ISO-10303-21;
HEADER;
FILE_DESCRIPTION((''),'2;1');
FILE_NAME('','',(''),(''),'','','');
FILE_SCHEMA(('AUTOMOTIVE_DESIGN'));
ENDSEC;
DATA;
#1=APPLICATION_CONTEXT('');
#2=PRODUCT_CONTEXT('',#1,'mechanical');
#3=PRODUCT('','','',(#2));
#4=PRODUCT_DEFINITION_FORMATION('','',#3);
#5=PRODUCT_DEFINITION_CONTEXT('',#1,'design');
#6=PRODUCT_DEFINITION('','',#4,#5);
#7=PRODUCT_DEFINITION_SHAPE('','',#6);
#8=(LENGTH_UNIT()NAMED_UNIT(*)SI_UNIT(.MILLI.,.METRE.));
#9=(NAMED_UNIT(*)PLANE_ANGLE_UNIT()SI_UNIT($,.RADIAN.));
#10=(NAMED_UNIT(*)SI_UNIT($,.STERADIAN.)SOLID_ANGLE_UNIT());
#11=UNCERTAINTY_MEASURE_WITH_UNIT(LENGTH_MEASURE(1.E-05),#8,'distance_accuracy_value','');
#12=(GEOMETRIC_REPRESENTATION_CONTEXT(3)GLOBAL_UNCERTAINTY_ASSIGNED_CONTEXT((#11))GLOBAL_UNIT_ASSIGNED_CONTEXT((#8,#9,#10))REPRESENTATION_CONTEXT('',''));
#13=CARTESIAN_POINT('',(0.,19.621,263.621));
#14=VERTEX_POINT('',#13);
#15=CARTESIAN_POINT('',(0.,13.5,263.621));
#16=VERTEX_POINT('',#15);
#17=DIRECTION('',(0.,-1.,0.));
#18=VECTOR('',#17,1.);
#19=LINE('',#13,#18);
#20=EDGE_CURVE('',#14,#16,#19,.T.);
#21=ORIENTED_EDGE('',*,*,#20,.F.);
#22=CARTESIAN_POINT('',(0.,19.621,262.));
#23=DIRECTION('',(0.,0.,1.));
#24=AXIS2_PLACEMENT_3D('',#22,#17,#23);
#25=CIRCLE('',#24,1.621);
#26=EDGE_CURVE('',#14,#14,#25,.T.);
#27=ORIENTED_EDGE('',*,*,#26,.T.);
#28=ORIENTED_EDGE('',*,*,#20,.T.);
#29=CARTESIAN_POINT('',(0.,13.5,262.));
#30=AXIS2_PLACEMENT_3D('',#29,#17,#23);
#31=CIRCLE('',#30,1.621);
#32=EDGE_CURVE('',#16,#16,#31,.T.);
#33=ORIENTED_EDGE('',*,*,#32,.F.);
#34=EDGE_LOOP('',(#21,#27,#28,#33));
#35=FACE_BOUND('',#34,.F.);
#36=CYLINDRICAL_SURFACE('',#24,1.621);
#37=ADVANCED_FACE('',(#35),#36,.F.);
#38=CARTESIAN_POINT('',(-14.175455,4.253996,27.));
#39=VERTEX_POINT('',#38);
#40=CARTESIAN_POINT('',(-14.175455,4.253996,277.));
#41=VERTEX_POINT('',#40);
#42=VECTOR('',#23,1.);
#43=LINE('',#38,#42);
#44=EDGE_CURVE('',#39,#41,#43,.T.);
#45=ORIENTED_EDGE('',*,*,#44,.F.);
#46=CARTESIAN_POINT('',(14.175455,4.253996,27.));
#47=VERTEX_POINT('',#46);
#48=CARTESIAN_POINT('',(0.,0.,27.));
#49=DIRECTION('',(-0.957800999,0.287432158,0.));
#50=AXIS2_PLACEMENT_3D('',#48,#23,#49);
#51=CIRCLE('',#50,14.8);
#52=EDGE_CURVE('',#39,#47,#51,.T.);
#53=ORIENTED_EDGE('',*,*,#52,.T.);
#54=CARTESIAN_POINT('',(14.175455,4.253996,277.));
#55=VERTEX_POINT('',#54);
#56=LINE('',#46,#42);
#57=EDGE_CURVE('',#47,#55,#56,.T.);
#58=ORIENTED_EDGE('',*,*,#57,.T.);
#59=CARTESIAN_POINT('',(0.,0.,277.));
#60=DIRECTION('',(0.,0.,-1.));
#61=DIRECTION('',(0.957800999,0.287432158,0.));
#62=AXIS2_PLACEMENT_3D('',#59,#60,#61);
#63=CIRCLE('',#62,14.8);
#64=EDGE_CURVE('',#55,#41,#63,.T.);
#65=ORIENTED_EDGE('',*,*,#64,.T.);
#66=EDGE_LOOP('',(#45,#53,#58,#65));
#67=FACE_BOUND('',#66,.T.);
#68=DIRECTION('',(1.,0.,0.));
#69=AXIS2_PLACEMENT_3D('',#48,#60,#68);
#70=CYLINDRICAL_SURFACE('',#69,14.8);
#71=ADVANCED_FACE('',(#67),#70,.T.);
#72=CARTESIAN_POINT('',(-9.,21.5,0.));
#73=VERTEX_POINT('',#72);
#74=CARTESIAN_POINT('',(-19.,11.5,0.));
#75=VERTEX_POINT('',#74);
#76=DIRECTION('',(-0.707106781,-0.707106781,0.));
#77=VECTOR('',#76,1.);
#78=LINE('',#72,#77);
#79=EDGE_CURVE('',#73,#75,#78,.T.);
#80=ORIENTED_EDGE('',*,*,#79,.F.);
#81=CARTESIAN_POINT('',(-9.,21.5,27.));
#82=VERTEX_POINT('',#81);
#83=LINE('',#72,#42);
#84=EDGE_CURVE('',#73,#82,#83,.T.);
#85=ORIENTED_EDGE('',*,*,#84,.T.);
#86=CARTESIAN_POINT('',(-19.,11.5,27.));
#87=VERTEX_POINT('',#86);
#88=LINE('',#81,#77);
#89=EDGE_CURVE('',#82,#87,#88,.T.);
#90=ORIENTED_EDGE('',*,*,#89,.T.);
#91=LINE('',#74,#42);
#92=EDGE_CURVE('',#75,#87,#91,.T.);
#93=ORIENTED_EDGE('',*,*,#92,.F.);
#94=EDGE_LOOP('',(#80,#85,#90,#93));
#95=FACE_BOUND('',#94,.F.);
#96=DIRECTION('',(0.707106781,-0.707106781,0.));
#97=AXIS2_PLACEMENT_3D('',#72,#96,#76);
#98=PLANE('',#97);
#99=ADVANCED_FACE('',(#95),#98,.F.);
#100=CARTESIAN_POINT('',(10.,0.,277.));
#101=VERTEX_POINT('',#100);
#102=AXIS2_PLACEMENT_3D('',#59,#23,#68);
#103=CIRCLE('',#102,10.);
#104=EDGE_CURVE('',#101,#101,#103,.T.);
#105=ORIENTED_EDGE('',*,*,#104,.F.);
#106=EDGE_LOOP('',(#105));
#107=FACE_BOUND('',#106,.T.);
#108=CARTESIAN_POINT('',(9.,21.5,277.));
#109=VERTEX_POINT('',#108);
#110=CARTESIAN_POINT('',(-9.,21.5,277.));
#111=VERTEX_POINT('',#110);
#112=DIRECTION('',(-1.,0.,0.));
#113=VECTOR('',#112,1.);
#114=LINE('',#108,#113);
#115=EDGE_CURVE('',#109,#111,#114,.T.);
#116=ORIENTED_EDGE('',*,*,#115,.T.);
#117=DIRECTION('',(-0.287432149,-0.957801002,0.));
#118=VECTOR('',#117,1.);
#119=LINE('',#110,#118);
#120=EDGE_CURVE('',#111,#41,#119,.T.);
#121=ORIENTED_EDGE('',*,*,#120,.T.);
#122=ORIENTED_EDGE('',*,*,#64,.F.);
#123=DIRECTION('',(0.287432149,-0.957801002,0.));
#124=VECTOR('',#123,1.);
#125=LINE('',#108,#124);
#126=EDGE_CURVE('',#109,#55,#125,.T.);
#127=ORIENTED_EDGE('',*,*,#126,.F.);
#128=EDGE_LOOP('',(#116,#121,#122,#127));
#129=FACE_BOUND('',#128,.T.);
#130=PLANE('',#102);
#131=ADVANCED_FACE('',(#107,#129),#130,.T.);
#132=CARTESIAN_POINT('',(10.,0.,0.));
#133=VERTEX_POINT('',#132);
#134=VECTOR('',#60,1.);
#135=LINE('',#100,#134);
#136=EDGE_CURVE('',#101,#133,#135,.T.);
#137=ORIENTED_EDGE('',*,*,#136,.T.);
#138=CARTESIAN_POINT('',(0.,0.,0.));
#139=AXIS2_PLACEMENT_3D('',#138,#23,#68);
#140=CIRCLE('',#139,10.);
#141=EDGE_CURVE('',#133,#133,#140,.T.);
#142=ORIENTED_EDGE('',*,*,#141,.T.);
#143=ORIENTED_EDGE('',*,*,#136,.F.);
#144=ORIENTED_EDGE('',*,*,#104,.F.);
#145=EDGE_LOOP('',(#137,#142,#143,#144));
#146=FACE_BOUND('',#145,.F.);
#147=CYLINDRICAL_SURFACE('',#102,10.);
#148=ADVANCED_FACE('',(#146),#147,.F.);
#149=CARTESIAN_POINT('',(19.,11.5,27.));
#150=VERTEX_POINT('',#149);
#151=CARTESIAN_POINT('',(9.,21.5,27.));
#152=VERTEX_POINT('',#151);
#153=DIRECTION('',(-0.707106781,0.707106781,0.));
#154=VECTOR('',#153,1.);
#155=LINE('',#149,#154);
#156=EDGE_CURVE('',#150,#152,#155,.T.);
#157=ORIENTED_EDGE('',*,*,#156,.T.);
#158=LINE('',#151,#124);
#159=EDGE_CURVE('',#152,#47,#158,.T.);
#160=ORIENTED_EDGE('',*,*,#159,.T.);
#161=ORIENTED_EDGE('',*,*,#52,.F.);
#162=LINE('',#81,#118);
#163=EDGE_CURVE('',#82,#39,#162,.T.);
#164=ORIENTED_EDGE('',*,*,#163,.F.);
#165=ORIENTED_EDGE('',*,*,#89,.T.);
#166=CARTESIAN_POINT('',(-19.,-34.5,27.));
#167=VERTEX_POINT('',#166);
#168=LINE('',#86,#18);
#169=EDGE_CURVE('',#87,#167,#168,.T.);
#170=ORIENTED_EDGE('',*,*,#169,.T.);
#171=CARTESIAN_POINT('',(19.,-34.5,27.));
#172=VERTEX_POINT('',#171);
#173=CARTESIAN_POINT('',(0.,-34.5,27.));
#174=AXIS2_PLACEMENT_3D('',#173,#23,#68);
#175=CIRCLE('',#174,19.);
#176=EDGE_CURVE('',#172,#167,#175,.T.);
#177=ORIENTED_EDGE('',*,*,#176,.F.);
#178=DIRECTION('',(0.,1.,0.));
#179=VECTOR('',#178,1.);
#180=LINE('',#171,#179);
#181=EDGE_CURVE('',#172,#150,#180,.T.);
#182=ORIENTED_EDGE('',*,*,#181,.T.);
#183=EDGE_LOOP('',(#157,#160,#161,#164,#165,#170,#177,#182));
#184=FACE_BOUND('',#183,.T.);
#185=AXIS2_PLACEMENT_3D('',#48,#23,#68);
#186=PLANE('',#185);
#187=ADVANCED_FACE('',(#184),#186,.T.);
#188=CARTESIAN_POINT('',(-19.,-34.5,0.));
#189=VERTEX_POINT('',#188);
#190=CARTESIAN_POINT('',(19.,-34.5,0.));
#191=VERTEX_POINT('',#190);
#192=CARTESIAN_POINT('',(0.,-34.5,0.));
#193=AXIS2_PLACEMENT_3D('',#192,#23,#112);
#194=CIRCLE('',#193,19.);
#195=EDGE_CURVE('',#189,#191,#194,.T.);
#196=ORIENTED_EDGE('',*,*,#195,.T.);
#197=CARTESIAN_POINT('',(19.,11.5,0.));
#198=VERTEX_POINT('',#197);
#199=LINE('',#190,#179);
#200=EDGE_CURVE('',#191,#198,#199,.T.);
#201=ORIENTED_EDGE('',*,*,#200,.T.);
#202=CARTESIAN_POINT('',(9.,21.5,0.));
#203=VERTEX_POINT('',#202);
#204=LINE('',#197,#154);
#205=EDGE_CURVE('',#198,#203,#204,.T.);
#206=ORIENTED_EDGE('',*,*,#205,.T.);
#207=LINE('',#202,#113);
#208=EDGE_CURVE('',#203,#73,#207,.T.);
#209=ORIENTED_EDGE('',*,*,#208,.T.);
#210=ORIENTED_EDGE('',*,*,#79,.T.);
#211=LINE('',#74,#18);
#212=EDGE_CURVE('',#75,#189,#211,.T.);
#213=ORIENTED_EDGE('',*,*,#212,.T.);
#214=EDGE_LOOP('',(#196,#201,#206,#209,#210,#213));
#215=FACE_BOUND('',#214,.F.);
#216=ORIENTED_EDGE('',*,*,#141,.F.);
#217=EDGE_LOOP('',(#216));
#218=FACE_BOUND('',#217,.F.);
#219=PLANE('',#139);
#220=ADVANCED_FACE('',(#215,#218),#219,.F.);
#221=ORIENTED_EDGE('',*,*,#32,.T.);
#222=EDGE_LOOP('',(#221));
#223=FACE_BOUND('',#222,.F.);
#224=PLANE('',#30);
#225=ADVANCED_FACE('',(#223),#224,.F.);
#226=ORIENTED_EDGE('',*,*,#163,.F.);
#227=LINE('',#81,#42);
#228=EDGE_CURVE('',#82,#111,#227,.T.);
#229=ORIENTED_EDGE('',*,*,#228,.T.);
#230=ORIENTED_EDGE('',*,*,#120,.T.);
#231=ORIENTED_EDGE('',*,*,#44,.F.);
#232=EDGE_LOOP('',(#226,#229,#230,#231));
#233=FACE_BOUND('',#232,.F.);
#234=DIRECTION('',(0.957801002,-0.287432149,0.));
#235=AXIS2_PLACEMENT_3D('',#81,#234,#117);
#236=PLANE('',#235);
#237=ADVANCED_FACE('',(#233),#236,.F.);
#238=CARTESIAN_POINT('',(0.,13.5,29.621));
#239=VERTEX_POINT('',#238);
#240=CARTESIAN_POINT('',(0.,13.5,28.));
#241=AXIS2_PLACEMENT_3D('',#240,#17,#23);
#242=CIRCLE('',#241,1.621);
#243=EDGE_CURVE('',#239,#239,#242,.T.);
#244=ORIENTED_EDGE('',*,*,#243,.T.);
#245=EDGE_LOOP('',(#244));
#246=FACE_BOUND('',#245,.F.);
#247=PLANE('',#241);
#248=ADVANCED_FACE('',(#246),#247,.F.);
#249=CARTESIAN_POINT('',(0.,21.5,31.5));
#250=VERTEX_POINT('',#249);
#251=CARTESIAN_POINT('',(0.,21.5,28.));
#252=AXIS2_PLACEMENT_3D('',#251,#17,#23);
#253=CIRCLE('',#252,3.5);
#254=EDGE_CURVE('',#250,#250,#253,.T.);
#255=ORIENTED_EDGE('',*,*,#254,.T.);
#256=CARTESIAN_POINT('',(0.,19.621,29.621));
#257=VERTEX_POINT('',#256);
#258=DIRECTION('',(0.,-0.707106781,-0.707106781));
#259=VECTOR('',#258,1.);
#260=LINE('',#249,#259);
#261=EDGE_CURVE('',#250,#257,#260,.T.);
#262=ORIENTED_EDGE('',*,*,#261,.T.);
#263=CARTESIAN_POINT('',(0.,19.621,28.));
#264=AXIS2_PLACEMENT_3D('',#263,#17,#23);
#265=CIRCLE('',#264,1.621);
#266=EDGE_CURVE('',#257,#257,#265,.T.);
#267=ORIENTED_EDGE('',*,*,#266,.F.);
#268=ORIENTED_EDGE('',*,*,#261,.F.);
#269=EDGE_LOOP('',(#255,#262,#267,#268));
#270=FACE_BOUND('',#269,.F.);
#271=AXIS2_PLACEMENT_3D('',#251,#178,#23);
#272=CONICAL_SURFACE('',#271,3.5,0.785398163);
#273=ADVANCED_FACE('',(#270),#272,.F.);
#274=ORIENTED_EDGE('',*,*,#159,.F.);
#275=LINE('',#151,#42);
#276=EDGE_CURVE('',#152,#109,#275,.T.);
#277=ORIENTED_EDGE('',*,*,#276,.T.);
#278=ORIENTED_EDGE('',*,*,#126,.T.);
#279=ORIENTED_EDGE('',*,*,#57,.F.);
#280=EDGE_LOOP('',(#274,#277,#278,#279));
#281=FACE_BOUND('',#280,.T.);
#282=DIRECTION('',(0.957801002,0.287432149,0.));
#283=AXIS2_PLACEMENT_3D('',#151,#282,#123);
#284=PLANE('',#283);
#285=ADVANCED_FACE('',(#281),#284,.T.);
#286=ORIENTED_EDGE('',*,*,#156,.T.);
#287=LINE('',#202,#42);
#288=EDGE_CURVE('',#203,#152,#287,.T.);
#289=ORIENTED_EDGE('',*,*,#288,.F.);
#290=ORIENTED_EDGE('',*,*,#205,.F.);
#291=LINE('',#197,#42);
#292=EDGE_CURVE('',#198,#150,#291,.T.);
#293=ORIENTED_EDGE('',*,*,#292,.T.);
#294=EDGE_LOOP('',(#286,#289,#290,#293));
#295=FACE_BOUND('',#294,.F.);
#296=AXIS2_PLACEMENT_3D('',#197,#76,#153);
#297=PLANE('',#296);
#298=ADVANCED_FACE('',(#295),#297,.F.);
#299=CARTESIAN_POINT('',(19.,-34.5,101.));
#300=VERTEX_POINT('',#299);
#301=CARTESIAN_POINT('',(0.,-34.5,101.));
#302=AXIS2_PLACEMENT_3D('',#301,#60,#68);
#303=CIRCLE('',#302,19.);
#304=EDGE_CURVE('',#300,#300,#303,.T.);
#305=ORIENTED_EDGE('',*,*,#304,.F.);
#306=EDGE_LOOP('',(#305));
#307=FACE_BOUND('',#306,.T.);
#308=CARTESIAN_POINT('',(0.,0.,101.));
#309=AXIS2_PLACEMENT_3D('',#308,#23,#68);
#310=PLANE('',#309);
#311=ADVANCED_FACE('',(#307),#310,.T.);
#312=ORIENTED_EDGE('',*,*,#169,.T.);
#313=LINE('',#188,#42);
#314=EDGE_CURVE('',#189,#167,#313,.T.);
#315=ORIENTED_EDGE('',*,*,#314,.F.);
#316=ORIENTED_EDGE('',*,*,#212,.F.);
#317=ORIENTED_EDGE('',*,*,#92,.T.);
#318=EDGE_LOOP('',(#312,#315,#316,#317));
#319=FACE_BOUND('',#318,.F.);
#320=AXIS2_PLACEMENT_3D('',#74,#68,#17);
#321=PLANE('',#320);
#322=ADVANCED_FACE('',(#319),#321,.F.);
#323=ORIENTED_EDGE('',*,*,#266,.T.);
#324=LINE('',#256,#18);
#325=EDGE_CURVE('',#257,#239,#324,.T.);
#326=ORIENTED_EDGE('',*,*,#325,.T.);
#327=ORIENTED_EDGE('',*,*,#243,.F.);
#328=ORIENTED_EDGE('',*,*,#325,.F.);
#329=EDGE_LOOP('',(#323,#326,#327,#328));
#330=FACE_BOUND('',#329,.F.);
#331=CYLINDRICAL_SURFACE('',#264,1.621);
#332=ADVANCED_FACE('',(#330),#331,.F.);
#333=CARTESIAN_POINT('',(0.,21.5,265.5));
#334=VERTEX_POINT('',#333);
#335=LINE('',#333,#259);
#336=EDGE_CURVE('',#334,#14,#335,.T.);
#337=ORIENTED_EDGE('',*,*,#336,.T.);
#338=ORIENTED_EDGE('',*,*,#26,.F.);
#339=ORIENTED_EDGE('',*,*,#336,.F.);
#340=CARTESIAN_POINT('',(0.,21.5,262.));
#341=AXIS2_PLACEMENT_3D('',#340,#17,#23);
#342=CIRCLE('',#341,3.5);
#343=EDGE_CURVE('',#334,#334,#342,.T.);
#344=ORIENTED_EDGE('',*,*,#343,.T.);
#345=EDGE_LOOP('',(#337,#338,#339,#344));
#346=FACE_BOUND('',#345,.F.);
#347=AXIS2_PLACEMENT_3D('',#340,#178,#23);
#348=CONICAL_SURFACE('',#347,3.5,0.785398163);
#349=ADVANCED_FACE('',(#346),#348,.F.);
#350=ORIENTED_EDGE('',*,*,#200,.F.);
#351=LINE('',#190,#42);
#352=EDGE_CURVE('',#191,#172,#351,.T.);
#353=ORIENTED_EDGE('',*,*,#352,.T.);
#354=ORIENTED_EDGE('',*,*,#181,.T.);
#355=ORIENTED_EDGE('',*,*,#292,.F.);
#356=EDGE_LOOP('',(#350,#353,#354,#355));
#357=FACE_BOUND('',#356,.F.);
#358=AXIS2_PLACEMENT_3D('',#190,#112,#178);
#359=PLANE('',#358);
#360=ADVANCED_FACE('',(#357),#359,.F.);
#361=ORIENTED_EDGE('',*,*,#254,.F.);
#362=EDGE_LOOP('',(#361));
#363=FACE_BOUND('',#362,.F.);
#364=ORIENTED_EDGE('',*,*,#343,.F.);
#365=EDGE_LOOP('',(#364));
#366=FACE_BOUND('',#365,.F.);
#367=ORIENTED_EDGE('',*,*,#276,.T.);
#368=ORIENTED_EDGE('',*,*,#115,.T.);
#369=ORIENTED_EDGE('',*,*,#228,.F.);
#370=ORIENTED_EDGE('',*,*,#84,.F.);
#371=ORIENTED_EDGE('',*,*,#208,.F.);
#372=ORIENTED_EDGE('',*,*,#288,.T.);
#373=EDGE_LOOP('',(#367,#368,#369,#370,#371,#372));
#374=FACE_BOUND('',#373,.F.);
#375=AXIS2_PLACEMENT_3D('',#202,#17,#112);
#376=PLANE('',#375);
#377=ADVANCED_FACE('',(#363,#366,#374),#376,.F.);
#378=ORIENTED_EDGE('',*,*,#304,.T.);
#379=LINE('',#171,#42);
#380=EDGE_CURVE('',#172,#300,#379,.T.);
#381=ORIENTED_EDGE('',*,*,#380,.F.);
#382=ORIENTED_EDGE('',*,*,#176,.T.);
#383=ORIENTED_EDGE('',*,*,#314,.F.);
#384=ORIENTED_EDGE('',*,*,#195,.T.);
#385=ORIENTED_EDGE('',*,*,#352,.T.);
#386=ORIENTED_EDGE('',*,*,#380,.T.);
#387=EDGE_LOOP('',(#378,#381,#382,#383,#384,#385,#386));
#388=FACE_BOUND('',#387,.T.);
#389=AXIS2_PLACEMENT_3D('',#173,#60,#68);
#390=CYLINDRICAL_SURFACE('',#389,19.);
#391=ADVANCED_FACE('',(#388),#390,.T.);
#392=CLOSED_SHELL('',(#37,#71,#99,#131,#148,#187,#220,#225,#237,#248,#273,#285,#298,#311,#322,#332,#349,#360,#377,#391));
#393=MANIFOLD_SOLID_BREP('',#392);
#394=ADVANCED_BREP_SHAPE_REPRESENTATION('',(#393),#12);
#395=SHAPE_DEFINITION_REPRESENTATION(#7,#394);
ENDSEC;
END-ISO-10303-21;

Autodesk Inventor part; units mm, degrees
ref_plane "YZ Plane" through (0, 0, 0) normal (1, 0, 0) x (0, 1, 0)
ref_plane "XZ Plane" through (0, 0, 0) normal (0, 1, 0) x (-1, 0, 0)
ref_plane "XY Plane" through (0, 0, 0) normal (0, 0, 1) x (1, 0, 0)
sketch "Sketch1" plane through (0, 0, 0) normal (0, 0, 1) x (1, 0, 0)
  circle A0 centre (0, 0) radius 14.8
  line L0 (-9, 21.5) -> (9, 21.5)
  line L1 (-9, 21.5) -> (-19, 11.5)
  line L2 (-19, 11.5) -> (-19, -34.776357)
  circle A1 centre (0, -34.5) radius 19
  line L3 (0, 21.5) -> (0, -34.5) construction
  line L4 (9, 21.5) -> (19, 11.5)
  line L5 (19, 11.5) -> (19, -34.776357)
  point P0 (-19, -34.5)
  point P1 (19, -34.5)
  dimension "d0" = 29.6
  dimension "d1" = 18
  dimension "d2" = 21.5
  dimension "d3" = 38
  dimension "d4" = 56
  dimension "d5" = 45
sketch "Sketch1 outline for Extrusion1" plane through (0, 0, 0) normal (0, 0, 1) x (1, 0, 0)
  line L0 (19, 11.5) -> (9, 21.5)
  line L1 (19, -34.5) -> (19, 11.5)
  arc A0 (-19, -34.5) -> (19, -34.5) centre (0, -34.5) ccw
  line L2 (-19, 11.5) -> (-19, -34.5)
  line L3 (-9, 21.5) -> (-19, 11.5)
  line L4 (9, 21.5) -> (-9, 21.5)
extrude "Extrusion1" add sketch "Sketch1 outline for Extrusion1" along normal blind 27
sketch "Sketch2" plane through (0, 0, 27) normal (0, 0, 1) x (1, 0, 0)
  line L0 (9, 21.5) -> (-9, 21.5)
  circle A0 centre (0, 0) radius 14.8
  line L1 (-9, 21.5) -> (-14.175455, 4.253996)
  line L2 (9, 21.5) -> (14.175455, 4.253996)
  line L3 (9, 21.5) -> (-9, 21.5)
  line L4 (-9, 21.5) -> (9, 21.5)
  dimension "d8" = 29.6
extrude "Extrusion2" add sketch "Sketch2" along normal blind 250
sketch "Sketch3" plane through (0, 0, 27) normal (0, 0, 1) x (1, 0, 0)
  arc A0 (-19, -34.5) -> (19, -34.5) centre (0, -34.5) ccw projected
  circle A1 centre (0, -34.5) radius 19
  point P0 (0, 0)
  point P1 (19, -34.5)
  point P2 (-19, -34.5)
extrude "Extrusion3" add sketch "Sketch3" along normal blind 74
sketch "Sketch4" plane through (-9, 21.5, 0) normal (0, 1, 0) x (1, 0, 0)
  line L0 (18, 0) -> (0, 0) projected
  line L1 (0, 0) -> (0, -27) projected
  line L2 (0, -27) -> (0, -277) projected
  line L3 (18, -277) -> (0, -277) projected
  line L4 (18, -27) -> (18, -277) projected
  line L5 (18, 0) -> (18, -27) projected
  line L6 (-16, -266.5) -> (34, -266.5)
  point P0 (9, 0)
  point P1 (9, -266.5)
  point P2 (9, -277)
  dimension "d13" = 50
  dimension "d14" = 10.5
split_face "Split1"
sketch "Sketch5" plane through (0, 0, 277) normal (0, 0, 1) x (1, 0, 0)
  circle A0 centre (0, 0) radius 10
  dimension "d15" = 20
extrude "Extrusion4" cut sketch "Sketch5" against normal blind 427
sketch "Sketch6" plane through (-9, 21.5, 0) normal (0, 1, 0) x (1, 0, 0)
  line L0 (18, -266.5) -> (0, -266.5) projected
  line L1 (18, -27) -> (18, -266.5) projected
  line L2 (18, 0) -> (18, -27) projected
  line L3 (18, 0) -> (0, 0) projected
  line L4 (0, 0) -> (0, -27) projected
  line L5 (0, -27) -> (0, -266.5) projected
  line L6 (18, -266.5) -> (0, -266.5) projected
  line L7 (0, -266.5) -> (0, -277) projected
  line L8 (18, -277) -> (0, -277) projected
  line L9 (18, -266.5) -> (18, -277) projected
  point P0 (9, 0)
  point P1 (9, -262)
  point P2 (9, -28)
  point P3 (9, 0)
  point P4 (9, -277)
  dimension "d18" = 28
  dimension "d19" = 15
hole "Hole1" at (0, 21.5, 262) at (0, 21.5, 28) direction (0, -1, 0) diameter 3.242 depth 8 countersink diameter 7 countersink angle 90 thread size "M4x0.7" class "6H" standard "ISO Metric profile"
properties part number "Linear Motor (T-Frame)" material "Aluminum 6061"
